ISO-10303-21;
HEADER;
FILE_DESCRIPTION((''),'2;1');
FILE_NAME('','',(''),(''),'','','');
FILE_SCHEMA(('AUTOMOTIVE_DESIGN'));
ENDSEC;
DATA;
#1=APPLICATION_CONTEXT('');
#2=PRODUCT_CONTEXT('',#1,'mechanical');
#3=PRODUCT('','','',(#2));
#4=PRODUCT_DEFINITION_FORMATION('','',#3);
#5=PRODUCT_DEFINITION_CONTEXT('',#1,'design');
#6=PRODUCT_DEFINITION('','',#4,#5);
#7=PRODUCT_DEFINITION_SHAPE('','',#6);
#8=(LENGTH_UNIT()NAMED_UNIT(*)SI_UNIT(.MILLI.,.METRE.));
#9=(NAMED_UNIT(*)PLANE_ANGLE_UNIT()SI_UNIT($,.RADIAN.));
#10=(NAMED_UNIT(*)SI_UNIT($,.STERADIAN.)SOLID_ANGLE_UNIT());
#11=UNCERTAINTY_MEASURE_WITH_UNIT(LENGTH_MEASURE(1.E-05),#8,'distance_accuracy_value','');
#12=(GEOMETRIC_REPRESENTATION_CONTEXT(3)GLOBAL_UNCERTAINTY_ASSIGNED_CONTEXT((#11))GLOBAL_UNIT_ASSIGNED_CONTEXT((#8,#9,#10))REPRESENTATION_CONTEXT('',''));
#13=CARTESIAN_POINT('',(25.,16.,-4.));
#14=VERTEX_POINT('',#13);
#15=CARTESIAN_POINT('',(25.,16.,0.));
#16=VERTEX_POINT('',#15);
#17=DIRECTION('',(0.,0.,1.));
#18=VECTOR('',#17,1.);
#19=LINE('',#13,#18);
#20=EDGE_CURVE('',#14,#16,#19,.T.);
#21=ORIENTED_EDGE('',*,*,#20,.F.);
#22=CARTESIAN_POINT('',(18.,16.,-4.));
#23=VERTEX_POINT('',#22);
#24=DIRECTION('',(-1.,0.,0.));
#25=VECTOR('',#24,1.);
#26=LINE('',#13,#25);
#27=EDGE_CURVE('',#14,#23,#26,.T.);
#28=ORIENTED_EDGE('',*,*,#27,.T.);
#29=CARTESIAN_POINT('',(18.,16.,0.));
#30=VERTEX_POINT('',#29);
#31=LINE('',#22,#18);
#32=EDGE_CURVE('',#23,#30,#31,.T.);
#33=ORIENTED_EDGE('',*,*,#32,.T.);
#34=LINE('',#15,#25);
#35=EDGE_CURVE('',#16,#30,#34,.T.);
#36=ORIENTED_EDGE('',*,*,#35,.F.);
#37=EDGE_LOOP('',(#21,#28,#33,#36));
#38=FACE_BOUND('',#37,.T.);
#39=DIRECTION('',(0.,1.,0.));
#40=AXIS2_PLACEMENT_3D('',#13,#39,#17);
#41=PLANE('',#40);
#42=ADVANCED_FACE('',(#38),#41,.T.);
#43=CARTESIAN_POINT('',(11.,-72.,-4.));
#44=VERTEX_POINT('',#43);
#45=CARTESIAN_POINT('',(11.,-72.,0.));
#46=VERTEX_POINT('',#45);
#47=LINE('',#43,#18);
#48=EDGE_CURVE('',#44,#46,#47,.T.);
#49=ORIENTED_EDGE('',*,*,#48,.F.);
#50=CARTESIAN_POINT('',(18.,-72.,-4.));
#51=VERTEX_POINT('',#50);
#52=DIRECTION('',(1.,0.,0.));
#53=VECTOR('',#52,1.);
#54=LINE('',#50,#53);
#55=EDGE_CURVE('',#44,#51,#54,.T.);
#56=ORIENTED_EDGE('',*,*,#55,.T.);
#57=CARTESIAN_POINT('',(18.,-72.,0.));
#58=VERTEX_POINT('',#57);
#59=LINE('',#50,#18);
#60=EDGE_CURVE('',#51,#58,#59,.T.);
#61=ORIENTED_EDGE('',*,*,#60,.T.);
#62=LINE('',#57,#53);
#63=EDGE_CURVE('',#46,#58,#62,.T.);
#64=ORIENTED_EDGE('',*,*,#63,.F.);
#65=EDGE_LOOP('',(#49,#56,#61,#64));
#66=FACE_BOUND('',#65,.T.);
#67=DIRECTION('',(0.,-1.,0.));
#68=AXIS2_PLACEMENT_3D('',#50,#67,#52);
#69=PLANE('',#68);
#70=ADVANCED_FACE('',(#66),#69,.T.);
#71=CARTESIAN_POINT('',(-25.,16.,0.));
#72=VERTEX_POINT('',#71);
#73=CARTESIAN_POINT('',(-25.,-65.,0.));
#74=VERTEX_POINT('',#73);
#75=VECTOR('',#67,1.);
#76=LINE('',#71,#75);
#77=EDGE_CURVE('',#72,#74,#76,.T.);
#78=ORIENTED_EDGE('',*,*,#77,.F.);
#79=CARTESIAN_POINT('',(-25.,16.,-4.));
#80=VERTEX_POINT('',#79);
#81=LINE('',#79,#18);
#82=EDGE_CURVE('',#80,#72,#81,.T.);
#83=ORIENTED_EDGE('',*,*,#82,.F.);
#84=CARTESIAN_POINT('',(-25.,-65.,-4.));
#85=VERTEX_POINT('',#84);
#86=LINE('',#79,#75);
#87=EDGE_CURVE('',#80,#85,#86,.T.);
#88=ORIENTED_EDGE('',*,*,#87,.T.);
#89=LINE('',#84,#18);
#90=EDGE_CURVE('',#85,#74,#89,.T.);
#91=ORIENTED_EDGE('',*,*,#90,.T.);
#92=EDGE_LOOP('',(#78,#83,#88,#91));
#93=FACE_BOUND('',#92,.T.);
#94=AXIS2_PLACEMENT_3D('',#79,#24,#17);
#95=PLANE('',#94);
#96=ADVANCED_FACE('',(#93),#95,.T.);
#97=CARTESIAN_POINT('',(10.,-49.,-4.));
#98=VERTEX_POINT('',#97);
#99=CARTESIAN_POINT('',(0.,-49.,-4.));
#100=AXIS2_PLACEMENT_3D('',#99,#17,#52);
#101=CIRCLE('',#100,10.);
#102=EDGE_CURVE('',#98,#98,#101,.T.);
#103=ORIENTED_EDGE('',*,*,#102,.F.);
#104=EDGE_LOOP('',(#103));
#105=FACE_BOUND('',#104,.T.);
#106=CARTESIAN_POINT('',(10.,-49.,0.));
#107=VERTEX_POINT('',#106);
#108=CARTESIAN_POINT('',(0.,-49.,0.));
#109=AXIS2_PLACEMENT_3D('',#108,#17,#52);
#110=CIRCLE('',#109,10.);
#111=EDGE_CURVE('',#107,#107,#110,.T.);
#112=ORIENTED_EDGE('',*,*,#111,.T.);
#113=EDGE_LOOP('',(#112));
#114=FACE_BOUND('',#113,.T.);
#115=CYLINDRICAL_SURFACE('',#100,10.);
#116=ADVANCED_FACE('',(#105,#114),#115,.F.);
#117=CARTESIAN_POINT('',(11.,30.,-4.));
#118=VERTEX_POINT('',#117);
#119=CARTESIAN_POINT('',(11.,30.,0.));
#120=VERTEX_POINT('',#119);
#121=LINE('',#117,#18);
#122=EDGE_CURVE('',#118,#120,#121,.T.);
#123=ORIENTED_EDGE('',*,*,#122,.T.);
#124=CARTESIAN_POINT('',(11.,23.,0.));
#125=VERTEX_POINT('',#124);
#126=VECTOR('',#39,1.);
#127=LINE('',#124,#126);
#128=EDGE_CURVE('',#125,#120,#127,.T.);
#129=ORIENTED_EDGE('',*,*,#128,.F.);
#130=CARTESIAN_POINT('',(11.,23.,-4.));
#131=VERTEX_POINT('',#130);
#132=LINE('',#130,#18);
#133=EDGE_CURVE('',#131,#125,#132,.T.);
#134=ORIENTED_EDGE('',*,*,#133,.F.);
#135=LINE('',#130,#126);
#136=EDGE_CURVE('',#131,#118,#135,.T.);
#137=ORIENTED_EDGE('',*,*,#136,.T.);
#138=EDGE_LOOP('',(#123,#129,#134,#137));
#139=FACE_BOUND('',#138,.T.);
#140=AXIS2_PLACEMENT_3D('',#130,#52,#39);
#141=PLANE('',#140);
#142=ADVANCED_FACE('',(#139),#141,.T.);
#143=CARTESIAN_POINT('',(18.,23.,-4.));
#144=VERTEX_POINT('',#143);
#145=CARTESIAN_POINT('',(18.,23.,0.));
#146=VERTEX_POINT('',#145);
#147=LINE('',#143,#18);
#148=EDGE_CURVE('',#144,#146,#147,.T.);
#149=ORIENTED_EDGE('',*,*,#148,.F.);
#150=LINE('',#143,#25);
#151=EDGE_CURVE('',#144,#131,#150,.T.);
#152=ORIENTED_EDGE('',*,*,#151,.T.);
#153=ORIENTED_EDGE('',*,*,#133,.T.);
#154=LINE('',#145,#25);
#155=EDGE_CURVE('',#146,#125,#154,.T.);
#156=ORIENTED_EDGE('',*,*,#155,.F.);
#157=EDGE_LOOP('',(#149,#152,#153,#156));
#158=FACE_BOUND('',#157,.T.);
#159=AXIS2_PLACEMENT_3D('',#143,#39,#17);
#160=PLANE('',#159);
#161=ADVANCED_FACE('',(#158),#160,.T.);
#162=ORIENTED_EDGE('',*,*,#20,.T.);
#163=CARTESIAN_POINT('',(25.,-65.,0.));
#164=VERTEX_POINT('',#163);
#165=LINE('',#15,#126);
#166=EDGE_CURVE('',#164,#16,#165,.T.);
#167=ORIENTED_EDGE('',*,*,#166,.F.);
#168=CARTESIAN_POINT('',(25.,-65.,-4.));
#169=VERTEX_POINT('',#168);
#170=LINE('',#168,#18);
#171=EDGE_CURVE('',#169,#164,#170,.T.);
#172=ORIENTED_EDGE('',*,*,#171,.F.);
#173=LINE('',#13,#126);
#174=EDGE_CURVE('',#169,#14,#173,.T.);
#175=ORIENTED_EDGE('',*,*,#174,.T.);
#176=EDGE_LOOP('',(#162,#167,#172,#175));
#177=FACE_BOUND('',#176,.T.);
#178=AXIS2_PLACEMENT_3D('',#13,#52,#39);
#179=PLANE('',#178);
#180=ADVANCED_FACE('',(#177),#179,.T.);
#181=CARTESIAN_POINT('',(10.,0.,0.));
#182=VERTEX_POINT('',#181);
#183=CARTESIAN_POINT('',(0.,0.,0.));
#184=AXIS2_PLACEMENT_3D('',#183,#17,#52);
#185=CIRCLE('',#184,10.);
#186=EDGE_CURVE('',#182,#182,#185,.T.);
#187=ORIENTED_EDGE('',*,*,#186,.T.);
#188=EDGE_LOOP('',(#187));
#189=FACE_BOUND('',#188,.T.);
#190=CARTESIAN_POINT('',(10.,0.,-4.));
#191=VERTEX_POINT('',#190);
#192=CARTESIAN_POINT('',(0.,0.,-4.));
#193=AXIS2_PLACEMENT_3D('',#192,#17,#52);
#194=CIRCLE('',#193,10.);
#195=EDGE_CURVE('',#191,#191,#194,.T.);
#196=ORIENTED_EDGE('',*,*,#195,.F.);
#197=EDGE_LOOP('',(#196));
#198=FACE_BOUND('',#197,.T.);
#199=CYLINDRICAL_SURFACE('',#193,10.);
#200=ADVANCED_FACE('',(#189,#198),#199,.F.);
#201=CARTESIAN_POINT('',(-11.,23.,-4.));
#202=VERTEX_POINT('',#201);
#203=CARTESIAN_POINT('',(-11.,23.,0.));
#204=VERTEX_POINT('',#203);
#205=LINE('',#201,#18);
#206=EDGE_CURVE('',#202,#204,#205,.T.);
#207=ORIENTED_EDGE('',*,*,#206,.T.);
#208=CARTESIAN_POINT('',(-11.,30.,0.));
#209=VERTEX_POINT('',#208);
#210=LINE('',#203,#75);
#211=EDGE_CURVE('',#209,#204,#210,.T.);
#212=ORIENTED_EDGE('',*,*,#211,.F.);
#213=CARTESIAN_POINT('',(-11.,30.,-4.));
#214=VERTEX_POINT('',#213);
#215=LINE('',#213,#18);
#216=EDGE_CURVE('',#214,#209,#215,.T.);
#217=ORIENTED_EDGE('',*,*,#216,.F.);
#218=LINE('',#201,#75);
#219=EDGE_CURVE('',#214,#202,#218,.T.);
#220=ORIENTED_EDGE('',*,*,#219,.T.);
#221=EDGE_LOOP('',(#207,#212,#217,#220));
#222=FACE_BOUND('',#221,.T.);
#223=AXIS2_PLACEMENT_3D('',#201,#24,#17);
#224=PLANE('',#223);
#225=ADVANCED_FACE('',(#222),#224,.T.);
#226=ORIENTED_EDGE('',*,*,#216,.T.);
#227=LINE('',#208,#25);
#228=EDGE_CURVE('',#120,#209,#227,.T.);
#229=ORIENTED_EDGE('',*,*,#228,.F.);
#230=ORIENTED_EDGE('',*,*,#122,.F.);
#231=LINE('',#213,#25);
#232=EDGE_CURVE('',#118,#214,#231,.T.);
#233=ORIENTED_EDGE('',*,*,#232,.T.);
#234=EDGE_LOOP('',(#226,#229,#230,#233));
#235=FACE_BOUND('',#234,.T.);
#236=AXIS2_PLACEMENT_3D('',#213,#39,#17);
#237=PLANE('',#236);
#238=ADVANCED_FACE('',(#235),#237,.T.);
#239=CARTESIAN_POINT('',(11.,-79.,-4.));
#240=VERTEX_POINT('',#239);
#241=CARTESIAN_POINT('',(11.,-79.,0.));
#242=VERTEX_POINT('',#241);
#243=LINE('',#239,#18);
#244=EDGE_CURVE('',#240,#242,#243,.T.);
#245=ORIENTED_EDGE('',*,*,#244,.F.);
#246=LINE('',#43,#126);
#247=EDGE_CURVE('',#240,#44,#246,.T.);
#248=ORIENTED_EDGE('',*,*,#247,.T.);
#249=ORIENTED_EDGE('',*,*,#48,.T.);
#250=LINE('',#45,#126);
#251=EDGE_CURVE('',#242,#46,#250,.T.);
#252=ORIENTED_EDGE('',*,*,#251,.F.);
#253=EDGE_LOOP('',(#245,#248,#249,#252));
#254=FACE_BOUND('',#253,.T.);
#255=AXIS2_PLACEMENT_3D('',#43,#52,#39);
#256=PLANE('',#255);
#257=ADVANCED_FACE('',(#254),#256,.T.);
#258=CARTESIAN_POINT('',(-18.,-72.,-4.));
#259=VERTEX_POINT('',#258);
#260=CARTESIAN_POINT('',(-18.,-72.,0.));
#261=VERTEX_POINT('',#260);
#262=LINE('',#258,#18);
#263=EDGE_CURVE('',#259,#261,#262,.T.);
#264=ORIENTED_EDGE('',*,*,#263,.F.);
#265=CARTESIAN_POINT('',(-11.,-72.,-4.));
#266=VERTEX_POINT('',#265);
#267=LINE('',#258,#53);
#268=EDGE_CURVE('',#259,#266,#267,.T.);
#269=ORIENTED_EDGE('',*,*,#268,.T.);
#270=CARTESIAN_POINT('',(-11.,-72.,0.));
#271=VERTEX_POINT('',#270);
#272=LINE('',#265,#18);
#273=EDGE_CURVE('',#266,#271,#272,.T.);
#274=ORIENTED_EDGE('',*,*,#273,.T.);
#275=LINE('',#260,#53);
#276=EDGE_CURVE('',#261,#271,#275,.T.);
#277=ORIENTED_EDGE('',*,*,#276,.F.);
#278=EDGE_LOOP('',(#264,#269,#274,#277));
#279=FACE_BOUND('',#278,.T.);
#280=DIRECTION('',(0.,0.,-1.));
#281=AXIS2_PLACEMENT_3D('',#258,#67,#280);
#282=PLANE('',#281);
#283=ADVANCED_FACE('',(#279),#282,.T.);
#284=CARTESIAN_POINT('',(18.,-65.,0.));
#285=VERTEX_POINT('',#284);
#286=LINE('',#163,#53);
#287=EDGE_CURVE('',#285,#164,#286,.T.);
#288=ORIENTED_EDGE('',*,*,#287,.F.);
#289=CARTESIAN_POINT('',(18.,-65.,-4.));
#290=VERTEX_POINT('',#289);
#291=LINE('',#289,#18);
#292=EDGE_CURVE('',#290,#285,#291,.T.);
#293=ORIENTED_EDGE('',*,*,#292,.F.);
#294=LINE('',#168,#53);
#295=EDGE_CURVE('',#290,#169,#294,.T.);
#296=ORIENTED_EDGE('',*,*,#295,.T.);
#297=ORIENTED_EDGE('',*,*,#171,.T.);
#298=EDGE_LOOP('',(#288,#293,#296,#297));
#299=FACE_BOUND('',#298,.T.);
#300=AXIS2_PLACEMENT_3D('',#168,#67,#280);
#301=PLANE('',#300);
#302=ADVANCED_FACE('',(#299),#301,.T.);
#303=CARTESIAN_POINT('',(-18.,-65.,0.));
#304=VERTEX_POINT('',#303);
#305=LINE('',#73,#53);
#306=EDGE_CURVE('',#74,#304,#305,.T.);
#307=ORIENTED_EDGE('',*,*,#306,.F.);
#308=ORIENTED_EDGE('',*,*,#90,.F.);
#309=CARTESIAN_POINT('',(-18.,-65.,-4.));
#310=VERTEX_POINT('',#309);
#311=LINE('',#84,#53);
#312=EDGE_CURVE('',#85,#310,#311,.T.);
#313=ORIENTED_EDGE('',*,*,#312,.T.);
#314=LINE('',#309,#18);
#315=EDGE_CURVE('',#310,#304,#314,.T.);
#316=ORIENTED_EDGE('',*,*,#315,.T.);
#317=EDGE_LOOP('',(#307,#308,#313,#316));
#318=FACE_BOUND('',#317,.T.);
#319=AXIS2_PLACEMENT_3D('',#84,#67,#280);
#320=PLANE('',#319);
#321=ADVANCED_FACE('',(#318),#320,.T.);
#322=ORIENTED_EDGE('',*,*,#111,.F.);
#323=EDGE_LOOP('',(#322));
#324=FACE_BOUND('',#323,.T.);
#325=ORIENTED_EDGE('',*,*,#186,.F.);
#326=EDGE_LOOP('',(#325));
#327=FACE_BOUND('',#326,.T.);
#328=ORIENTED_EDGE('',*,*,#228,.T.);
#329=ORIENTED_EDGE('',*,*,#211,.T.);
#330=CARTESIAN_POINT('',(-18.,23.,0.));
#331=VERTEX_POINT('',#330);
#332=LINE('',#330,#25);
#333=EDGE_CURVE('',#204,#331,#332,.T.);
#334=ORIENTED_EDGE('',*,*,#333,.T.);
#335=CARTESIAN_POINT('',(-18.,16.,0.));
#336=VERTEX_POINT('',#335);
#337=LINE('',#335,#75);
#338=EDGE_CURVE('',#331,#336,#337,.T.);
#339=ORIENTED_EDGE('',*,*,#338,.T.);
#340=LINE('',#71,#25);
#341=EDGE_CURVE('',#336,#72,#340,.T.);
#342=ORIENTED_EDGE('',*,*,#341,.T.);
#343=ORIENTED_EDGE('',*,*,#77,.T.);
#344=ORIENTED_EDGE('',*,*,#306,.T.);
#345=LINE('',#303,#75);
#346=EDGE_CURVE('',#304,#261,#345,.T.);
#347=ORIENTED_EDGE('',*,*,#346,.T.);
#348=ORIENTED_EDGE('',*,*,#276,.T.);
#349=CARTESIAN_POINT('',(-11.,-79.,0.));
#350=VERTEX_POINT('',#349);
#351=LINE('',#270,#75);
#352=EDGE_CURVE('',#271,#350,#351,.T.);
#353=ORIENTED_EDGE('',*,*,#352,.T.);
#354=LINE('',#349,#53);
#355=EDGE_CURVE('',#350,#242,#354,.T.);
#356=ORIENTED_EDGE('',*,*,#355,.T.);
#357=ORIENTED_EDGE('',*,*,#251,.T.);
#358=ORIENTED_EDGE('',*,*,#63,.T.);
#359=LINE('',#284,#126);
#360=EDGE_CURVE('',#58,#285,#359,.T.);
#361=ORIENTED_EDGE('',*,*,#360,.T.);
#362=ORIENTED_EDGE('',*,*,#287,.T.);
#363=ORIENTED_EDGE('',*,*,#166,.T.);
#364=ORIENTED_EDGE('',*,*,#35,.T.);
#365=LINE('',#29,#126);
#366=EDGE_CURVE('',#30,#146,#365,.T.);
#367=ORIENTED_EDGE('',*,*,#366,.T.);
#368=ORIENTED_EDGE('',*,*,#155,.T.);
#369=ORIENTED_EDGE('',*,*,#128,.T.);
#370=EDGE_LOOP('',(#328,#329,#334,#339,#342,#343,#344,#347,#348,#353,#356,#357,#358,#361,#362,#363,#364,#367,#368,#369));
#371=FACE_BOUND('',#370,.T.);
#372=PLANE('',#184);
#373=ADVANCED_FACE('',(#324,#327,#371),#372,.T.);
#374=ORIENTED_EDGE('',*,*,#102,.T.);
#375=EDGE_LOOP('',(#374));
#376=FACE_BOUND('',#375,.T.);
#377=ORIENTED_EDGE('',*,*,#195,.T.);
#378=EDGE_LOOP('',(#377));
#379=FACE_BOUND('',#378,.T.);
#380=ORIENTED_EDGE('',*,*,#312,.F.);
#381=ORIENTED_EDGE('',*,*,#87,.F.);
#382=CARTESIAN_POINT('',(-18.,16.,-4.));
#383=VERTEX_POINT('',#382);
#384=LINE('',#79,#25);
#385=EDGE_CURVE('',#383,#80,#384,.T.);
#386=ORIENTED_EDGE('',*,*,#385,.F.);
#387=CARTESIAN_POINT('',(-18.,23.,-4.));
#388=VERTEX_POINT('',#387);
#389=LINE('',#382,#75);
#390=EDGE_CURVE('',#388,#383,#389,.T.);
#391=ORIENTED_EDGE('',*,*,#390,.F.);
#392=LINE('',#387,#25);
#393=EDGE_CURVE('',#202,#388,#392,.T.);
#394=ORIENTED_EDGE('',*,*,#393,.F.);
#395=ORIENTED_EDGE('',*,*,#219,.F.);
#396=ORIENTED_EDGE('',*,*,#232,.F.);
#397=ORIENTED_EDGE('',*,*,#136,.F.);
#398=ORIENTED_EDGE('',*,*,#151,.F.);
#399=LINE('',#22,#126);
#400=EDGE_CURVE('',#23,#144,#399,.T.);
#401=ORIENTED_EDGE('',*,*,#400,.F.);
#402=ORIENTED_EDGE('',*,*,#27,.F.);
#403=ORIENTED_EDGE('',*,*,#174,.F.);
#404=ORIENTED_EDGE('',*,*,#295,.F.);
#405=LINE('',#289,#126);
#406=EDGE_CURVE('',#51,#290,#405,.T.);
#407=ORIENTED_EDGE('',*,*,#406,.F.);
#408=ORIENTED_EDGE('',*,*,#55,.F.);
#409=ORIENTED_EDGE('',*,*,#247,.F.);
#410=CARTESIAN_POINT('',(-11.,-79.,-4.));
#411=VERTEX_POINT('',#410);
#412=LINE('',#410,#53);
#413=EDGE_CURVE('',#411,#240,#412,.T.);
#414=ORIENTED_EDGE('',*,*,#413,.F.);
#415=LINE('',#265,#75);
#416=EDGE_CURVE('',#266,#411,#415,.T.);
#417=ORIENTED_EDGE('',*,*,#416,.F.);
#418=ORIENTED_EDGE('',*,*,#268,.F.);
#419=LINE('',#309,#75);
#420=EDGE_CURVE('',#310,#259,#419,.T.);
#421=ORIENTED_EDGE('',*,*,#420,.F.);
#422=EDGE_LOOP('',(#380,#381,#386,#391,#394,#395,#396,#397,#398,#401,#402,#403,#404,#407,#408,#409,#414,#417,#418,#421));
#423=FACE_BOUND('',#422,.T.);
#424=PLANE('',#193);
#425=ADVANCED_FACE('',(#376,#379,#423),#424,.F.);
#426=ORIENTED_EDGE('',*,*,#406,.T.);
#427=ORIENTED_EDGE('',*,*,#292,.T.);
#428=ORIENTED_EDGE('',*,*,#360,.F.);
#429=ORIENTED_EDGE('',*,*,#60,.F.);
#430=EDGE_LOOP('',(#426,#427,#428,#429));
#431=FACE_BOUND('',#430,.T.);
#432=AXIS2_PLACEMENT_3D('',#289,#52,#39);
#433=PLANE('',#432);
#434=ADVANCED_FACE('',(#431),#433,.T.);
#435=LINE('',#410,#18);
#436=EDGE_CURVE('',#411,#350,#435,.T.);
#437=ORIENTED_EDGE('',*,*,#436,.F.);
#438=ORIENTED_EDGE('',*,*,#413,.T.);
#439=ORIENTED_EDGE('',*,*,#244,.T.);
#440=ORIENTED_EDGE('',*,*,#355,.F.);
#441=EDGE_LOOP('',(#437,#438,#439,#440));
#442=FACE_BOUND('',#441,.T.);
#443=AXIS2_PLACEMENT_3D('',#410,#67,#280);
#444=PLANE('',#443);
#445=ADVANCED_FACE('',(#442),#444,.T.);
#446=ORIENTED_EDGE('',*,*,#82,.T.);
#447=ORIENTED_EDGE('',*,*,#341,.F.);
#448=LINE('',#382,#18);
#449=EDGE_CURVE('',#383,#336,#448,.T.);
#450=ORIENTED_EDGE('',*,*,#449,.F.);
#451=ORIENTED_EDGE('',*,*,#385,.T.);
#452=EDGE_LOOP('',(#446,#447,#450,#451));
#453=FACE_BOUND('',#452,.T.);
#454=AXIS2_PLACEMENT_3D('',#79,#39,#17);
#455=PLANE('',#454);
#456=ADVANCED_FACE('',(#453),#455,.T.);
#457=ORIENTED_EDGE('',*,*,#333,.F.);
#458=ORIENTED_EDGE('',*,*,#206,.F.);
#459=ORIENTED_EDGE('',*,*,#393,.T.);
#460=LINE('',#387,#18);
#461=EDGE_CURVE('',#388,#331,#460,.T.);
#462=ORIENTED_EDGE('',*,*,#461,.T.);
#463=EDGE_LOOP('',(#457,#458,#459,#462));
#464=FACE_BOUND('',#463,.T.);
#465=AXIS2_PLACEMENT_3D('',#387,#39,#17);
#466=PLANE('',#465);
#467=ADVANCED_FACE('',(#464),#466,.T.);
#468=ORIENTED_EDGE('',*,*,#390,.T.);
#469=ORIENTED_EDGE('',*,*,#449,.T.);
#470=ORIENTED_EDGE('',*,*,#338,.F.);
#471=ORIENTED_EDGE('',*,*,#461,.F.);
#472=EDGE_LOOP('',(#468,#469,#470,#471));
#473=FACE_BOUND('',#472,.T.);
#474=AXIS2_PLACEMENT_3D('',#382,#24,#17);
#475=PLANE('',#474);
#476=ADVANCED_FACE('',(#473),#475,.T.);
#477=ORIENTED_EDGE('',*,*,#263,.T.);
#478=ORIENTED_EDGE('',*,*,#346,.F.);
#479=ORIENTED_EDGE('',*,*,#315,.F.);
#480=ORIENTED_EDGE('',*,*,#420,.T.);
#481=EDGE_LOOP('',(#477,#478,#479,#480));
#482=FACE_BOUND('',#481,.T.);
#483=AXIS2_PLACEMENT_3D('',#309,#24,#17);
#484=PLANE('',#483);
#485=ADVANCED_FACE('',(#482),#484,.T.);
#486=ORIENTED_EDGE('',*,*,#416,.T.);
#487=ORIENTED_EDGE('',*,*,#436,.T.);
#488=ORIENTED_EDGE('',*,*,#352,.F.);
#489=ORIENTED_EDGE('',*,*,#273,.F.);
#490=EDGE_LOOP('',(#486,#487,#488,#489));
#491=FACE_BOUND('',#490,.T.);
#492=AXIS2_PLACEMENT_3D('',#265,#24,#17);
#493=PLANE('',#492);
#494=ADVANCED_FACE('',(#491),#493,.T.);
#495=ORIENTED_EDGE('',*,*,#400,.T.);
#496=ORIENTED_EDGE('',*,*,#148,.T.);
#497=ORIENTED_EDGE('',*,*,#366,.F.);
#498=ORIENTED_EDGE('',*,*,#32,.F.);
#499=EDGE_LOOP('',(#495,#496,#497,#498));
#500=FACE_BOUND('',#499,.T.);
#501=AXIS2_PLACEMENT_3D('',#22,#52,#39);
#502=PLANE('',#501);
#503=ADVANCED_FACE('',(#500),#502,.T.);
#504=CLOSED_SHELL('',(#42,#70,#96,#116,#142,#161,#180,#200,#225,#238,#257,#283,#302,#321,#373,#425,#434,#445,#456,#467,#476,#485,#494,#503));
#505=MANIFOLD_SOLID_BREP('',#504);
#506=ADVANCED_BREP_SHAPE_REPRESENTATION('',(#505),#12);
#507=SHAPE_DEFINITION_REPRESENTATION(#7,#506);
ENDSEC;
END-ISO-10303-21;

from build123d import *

# Parameters (mm, degrees)
SKETCH_1_R             = 10
SM_BASE_FLANGE_1_DEPTH = 4


# Sheet-metal steps are written as plain solids
with BuildPart() as part:
    # Sketch 1 → Базовая кромка1 (new body)
    with BuildSketch(Plane.XY):
        Polygon((-25, 16), (-25, -65), (-18, -65), (-18, -72), (-11, -72), (-11, -79), (11, -79), (11, -72), (18, -72), (18, -65), (25, -65), (25, 16), (18, 16), (18, 23), (11, 23), (11, 30), (-11, 30), (-11, 23), (-18, 23), (-18, 16), align=None)
        Circle(SKETCH_1_R, mode=Mode.SUBTRACT)
        with Locations((0, -49)):
            Circle(SKETCH_1_R, mode=Mode.SUBTRACT)
    extrude(amount=-SM_BASE_FLANGE_1_DEPTH)


solid = part.part
